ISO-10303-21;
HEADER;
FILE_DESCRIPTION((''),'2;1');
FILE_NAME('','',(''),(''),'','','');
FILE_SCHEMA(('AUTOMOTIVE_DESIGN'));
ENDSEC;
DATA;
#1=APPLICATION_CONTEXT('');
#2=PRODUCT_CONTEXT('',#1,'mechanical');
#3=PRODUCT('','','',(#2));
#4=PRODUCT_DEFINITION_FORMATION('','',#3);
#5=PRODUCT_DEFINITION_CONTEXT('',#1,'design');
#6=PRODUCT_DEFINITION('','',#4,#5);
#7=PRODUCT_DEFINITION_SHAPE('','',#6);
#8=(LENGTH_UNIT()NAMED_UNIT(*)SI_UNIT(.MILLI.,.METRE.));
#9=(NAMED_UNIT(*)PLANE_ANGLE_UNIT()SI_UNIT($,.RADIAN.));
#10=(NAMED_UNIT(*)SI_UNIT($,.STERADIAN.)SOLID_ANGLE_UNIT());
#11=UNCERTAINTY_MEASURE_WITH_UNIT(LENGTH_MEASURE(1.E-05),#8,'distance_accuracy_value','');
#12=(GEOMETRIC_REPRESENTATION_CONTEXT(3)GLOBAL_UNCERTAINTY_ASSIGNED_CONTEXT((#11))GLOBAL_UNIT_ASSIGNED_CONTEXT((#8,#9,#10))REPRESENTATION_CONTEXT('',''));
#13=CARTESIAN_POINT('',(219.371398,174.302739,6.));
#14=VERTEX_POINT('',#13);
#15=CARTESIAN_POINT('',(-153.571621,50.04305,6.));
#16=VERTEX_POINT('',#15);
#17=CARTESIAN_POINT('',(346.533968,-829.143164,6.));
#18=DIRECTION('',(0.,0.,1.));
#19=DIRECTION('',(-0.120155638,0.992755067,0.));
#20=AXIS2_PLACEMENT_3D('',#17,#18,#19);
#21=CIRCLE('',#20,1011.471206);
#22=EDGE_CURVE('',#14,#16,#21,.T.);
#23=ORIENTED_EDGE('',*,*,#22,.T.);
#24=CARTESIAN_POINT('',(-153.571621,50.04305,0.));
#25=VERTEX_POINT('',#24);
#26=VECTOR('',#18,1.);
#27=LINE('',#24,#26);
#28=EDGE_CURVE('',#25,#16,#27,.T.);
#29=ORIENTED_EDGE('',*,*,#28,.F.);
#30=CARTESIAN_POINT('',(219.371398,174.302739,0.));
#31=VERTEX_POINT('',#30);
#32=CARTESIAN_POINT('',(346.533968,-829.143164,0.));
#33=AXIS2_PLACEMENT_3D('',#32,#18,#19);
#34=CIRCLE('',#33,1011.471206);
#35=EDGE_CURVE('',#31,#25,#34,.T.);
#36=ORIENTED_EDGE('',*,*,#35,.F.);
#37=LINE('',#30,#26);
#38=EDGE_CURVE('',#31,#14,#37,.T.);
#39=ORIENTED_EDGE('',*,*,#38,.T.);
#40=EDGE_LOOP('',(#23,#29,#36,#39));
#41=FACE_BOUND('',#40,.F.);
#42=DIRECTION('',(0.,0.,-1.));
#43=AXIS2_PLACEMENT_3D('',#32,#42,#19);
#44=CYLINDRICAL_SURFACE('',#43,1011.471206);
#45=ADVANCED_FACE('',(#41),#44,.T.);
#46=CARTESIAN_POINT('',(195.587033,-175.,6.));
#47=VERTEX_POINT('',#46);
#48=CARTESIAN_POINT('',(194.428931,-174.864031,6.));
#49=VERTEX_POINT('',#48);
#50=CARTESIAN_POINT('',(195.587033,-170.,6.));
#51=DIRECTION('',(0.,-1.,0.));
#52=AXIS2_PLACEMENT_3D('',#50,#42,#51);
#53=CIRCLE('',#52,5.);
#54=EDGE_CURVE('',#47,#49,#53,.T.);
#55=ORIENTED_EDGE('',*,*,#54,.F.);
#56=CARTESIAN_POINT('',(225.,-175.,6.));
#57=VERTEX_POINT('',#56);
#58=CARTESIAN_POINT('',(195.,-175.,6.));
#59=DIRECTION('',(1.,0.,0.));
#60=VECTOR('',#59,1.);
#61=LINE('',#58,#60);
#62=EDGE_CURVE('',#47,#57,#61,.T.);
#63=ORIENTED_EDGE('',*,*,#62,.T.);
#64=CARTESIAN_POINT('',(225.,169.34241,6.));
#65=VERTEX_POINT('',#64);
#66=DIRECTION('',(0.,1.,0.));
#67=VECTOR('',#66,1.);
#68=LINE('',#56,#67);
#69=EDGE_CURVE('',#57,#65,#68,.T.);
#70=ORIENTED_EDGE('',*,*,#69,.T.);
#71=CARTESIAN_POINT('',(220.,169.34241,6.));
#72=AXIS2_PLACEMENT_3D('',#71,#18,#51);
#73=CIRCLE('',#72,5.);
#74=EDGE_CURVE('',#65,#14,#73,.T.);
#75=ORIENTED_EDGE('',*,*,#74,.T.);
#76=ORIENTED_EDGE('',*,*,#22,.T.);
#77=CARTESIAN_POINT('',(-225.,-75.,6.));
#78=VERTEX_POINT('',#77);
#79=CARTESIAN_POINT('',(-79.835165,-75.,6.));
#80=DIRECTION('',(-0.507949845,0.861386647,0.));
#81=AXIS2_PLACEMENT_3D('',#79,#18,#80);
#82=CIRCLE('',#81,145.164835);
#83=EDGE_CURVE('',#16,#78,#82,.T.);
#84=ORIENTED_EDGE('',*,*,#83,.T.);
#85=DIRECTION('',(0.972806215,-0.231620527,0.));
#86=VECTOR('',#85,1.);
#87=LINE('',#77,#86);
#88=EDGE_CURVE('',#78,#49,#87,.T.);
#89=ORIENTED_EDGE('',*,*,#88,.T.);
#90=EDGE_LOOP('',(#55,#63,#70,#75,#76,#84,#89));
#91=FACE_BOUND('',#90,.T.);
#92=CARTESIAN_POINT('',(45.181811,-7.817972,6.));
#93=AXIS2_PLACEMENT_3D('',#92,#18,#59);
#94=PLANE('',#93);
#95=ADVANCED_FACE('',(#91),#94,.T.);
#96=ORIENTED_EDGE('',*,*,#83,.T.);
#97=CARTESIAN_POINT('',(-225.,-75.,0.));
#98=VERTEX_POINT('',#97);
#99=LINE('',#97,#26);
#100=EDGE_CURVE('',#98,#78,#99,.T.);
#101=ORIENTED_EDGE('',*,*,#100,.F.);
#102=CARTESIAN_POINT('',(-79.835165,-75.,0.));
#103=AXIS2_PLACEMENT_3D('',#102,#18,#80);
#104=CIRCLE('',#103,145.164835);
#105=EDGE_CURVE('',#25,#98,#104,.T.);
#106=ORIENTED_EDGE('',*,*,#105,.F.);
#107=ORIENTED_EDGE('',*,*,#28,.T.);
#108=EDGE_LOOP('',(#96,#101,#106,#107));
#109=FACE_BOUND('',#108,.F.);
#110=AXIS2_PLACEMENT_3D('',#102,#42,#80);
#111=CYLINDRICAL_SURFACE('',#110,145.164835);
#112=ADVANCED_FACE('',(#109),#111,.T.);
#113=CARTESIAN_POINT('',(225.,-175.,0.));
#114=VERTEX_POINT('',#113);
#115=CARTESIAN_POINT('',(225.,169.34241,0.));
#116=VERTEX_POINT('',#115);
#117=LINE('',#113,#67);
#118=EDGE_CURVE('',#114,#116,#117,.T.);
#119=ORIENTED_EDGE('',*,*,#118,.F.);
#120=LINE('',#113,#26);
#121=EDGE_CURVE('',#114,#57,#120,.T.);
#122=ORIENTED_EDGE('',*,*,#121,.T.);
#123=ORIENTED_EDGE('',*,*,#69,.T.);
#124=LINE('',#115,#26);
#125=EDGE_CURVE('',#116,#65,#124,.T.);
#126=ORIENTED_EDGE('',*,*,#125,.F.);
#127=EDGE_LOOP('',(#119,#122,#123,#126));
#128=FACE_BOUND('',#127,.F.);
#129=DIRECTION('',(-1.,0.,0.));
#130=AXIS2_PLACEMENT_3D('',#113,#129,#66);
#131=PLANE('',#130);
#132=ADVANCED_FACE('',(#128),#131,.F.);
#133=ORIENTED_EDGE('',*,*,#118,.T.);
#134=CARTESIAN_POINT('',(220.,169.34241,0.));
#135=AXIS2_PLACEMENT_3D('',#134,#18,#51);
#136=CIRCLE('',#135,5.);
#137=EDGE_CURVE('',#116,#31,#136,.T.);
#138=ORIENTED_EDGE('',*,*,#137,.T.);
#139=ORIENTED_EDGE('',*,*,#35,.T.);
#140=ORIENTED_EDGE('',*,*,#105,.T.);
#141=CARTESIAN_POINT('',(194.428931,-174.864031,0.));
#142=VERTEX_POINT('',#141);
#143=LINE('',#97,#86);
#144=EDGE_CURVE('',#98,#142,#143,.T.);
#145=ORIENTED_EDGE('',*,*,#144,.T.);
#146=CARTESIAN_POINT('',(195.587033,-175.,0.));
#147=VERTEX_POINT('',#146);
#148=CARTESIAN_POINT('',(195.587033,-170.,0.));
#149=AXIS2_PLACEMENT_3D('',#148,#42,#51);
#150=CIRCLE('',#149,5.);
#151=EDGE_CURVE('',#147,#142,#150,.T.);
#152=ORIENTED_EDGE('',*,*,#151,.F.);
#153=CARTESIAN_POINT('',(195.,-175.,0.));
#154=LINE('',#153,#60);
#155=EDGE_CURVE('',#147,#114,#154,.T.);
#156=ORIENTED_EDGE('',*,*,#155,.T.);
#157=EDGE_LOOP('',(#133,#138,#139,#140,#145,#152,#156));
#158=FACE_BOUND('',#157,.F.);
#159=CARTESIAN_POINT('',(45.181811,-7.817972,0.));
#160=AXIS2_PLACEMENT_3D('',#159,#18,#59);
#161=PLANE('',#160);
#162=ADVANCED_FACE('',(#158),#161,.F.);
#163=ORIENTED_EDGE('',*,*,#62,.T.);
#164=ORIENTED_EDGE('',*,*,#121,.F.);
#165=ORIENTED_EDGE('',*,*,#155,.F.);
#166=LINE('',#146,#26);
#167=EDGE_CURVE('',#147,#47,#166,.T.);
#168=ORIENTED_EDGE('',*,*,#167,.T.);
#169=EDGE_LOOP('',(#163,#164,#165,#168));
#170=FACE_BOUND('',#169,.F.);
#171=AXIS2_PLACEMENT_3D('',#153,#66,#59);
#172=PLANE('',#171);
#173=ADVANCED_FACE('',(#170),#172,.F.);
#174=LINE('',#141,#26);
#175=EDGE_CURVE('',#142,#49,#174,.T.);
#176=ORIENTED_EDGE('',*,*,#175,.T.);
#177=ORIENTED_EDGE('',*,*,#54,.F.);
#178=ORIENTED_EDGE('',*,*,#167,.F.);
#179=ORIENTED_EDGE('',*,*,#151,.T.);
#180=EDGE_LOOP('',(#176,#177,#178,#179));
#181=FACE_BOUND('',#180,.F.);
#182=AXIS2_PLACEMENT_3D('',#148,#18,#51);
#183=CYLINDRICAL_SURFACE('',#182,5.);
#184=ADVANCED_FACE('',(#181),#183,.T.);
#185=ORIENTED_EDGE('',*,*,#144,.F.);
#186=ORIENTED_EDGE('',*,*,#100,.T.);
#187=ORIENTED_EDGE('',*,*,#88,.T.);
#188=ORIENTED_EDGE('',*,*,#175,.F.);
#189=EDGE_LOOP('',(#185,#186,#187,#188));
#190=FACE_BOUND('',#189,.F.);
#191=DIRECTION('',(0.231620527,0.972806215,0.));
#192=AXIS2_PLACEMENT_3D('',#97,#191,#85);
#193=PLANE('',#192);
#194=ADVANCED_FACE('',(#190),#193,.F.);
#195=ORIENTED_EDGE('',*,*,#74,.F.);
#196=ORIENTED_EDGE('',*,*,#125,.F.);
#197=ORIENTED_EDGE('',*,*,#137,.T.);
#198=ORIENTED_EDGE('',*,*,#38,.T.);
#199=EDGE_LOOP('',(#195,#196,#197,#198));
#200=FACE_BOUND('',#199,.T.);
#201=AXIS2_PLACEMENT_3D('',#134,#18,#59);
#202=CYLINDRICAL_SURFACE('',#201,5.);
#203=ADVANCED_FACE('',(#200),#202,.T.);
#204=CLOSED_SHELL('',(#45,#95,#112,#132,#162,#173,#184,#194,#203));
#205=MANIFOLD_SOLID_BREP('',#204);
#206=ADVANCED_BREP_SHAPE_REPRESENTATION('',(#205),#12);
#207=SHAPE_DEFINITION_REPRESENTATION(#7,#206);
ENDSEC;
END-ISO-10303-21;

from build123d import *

# Parameters (mm, degrees)
F1_DEPTH = 6
F2_R     = 5


with BuildPart() as f1:
    # F0 (on Top) → F1 (new body)
    with BuildSketch(Plane.XY):
        with BuildLine():
            Line((195, -175), (225, -175))
            Line((225, -175), (225, 175))
            ThreePointArc((225, 175), (29.4969127553, 131.3574891295), (-153.5716205835, 50.0430501997))
            ThreePointArc((-153.5716205835, 50.0430501997), (-205.8843017039, -2.9969136264), (-225, -75))
            Line((-225, -75), (195, -175))
        make_face()
    extrude(amount=F1_DEPTH)

    # F2
    f2_edges = [f1.edges().sort_by_distance(p)[0] for p in [
        (225, 175, 3),
        (195, -175, 3),
    ]]
    fillet(f2_edges, radius=F2_R)


solid = f1.part
